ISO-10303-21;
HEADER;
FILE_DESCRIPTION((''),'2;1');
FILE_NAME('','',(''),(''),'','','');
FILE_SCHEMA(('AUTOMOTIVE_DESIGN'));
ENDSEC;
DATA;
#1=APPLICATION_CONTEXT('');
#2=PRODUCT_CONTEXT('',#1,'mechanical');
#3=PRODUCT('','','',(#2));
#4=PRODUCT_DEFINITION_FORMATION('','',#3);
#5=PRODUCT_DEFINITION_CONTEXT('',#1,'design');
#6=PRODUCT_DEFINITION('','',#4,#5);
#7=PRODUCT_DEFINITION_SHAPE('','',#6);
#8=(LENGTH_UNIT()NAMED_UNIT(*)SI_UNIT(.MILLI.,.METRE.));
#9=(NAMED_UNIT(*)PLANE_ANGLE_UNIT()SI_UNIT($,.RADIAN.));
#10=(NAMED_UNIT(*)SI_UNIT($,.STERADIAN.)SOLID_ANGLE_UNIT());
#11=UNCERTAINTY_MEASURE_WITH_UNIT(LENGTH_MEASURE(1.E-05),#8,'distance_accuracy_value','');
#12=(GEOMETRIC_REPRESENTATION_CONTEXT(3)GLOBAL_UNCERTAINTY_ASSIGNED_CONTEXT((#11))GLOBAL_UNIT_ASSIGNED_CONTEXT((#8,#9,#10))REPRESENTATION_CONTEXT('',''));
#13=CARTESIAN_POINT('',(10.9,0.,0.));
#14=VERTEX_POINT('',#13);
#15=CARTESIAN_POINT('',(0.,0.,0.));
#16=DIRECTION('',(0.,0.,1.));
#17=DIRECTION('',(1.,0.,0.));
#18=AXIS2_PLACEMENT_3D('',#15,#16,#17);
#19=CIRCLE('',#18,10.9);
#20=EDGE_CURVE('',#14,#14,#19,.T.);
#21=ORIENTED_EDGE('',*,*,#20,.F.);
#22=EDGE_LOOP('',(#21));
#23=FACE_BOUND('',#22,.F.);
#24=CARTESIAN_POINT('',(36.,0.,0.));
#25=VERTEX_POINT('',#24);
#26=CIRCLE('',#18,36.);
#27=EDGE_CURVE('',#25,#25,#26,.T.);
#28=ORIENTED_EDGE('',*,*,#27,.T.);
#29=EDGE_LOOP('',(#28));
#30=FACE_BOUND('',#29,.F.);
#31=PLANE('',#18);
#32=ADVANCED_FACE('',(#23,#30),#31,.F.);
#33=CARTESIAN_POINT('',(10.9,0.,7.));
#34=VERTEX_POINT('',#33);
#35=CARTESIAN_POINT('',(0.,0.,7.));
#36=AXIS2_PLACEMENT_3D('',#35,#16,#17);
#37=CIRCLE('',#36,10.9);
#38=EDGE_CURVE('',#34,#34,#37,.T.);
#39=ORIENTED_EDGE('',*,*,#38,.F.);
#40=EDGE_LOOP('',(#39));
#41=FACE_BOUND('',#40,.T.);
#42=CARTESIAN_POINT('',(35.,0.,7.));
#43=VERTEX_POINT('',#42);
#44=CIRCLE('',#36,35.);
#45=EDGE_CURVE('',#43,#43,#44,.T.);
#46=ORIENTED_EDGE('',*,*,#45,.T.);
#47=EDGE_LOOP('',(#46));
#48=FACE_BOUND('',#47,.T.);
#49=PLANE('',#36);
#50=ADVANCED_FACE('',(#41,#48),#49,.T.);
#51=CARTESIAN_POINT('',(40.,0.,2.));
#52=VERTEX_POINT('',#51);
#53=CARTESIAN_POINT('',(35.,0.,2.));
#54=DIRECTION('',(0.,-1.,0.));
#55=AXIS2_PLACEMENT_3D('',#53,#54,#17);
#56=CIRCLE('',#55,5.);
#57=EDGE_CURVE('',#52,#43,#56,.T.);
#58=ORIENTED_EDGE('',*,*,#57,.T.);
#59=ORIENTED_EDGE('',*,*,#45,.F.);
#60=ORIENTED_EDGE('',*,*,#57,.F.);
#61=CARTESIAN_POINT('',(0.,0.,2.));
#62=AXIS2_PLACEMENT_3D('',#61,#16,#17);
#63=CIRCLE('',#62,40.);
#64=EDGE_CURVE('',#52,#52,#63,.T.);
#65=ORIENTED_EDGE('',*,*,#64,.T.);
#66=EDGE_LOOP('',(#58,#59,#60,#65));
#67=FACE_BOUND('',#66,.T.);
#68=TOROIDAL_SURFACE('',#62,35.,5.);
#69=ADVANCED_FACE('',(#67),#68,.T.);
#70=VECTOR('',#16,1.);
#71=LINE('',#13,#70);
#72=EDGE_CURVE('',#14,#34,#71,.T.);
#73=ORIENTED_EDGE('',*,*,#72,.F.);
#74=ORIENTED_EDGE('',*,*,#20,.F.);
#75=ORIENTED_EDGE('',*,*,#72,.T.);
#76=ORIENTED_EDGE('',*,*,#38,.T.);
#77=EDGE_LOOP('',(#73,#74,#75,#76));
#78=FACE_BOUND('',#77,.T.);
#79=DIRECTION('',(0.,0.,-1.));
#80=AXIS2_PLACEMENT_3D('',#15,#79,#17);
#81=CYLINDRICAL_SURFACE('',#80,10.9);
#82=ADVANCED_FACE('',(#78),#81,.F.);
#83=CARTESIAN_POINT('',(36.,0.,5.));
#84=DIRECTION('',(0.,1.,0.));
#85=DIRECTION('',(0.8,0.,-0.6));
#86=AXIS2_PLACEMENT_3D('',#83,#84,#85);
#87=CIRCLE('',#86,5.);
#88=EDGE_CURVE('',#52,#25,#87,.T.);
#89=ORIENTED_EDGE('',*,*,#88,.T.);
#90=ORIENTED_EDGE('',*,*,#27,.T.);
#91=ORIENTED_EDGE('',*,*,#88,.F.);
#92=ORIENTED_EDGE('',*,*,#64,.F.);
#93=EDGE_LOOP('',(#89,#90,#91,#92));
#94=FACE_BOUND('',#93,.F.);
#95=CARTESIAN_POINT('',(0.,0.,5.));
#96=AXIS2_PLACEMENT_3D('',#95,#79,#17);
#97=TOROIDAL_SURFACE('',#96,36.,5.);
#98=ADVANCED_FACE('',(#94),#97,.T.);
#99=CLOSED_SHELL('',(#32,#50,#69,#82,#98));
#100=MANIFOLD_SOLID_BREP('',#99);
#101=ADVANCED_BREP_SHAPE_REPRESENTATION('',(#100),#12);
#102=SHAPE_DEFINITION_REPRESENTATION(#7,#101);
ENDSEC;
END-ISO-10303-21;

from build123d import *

# Parameters (mm, degrees)
F0_R     = 40
F0_R_2   = 10.9
F1_DEPTH = 7
F2_R     = 5


# Not quite as in the source:
# - a fillet or chamfer that OpenCascade refuses, or shapes differently, is made with other operations: its cross-section is extruded or revolved along the edge and cut away or added


with BuildPart() as f1:
    # F0 (on Top) → F1 (new body)
    with BuildSketch(Plane.XY):
        Circle(F0_R)
        Circle(F0_R_2, mode=Mode.SUBTRACT)
    extrude(amount=F1_DEPTH)

    # F2
    f2_edges = [f1.edges().sort_by_distance(p)[0] for p in [
        (-40, 0, 7),
    ]]
    fillet(f2_edges, radius=F2_R)

    # F3: fillet of radius 5 on 1 edges, made by hand

    # F3_s1 → F3_t2 (revolve, cut)
    with BuildSketch(Plane.XZ):
        with BuildLine():
            ThreePointArc((40, 2), (38.2360679775, 0.527864045), (36, 0))
            Line((36, 0), (40, 0))
            Line((40, 0), (40, 2))
        make_face()
    revolve(axis=Axis((0, 0, 0), (0, 0, 1)), mode=Mode.SUBTRACT)


solid = f1.part
